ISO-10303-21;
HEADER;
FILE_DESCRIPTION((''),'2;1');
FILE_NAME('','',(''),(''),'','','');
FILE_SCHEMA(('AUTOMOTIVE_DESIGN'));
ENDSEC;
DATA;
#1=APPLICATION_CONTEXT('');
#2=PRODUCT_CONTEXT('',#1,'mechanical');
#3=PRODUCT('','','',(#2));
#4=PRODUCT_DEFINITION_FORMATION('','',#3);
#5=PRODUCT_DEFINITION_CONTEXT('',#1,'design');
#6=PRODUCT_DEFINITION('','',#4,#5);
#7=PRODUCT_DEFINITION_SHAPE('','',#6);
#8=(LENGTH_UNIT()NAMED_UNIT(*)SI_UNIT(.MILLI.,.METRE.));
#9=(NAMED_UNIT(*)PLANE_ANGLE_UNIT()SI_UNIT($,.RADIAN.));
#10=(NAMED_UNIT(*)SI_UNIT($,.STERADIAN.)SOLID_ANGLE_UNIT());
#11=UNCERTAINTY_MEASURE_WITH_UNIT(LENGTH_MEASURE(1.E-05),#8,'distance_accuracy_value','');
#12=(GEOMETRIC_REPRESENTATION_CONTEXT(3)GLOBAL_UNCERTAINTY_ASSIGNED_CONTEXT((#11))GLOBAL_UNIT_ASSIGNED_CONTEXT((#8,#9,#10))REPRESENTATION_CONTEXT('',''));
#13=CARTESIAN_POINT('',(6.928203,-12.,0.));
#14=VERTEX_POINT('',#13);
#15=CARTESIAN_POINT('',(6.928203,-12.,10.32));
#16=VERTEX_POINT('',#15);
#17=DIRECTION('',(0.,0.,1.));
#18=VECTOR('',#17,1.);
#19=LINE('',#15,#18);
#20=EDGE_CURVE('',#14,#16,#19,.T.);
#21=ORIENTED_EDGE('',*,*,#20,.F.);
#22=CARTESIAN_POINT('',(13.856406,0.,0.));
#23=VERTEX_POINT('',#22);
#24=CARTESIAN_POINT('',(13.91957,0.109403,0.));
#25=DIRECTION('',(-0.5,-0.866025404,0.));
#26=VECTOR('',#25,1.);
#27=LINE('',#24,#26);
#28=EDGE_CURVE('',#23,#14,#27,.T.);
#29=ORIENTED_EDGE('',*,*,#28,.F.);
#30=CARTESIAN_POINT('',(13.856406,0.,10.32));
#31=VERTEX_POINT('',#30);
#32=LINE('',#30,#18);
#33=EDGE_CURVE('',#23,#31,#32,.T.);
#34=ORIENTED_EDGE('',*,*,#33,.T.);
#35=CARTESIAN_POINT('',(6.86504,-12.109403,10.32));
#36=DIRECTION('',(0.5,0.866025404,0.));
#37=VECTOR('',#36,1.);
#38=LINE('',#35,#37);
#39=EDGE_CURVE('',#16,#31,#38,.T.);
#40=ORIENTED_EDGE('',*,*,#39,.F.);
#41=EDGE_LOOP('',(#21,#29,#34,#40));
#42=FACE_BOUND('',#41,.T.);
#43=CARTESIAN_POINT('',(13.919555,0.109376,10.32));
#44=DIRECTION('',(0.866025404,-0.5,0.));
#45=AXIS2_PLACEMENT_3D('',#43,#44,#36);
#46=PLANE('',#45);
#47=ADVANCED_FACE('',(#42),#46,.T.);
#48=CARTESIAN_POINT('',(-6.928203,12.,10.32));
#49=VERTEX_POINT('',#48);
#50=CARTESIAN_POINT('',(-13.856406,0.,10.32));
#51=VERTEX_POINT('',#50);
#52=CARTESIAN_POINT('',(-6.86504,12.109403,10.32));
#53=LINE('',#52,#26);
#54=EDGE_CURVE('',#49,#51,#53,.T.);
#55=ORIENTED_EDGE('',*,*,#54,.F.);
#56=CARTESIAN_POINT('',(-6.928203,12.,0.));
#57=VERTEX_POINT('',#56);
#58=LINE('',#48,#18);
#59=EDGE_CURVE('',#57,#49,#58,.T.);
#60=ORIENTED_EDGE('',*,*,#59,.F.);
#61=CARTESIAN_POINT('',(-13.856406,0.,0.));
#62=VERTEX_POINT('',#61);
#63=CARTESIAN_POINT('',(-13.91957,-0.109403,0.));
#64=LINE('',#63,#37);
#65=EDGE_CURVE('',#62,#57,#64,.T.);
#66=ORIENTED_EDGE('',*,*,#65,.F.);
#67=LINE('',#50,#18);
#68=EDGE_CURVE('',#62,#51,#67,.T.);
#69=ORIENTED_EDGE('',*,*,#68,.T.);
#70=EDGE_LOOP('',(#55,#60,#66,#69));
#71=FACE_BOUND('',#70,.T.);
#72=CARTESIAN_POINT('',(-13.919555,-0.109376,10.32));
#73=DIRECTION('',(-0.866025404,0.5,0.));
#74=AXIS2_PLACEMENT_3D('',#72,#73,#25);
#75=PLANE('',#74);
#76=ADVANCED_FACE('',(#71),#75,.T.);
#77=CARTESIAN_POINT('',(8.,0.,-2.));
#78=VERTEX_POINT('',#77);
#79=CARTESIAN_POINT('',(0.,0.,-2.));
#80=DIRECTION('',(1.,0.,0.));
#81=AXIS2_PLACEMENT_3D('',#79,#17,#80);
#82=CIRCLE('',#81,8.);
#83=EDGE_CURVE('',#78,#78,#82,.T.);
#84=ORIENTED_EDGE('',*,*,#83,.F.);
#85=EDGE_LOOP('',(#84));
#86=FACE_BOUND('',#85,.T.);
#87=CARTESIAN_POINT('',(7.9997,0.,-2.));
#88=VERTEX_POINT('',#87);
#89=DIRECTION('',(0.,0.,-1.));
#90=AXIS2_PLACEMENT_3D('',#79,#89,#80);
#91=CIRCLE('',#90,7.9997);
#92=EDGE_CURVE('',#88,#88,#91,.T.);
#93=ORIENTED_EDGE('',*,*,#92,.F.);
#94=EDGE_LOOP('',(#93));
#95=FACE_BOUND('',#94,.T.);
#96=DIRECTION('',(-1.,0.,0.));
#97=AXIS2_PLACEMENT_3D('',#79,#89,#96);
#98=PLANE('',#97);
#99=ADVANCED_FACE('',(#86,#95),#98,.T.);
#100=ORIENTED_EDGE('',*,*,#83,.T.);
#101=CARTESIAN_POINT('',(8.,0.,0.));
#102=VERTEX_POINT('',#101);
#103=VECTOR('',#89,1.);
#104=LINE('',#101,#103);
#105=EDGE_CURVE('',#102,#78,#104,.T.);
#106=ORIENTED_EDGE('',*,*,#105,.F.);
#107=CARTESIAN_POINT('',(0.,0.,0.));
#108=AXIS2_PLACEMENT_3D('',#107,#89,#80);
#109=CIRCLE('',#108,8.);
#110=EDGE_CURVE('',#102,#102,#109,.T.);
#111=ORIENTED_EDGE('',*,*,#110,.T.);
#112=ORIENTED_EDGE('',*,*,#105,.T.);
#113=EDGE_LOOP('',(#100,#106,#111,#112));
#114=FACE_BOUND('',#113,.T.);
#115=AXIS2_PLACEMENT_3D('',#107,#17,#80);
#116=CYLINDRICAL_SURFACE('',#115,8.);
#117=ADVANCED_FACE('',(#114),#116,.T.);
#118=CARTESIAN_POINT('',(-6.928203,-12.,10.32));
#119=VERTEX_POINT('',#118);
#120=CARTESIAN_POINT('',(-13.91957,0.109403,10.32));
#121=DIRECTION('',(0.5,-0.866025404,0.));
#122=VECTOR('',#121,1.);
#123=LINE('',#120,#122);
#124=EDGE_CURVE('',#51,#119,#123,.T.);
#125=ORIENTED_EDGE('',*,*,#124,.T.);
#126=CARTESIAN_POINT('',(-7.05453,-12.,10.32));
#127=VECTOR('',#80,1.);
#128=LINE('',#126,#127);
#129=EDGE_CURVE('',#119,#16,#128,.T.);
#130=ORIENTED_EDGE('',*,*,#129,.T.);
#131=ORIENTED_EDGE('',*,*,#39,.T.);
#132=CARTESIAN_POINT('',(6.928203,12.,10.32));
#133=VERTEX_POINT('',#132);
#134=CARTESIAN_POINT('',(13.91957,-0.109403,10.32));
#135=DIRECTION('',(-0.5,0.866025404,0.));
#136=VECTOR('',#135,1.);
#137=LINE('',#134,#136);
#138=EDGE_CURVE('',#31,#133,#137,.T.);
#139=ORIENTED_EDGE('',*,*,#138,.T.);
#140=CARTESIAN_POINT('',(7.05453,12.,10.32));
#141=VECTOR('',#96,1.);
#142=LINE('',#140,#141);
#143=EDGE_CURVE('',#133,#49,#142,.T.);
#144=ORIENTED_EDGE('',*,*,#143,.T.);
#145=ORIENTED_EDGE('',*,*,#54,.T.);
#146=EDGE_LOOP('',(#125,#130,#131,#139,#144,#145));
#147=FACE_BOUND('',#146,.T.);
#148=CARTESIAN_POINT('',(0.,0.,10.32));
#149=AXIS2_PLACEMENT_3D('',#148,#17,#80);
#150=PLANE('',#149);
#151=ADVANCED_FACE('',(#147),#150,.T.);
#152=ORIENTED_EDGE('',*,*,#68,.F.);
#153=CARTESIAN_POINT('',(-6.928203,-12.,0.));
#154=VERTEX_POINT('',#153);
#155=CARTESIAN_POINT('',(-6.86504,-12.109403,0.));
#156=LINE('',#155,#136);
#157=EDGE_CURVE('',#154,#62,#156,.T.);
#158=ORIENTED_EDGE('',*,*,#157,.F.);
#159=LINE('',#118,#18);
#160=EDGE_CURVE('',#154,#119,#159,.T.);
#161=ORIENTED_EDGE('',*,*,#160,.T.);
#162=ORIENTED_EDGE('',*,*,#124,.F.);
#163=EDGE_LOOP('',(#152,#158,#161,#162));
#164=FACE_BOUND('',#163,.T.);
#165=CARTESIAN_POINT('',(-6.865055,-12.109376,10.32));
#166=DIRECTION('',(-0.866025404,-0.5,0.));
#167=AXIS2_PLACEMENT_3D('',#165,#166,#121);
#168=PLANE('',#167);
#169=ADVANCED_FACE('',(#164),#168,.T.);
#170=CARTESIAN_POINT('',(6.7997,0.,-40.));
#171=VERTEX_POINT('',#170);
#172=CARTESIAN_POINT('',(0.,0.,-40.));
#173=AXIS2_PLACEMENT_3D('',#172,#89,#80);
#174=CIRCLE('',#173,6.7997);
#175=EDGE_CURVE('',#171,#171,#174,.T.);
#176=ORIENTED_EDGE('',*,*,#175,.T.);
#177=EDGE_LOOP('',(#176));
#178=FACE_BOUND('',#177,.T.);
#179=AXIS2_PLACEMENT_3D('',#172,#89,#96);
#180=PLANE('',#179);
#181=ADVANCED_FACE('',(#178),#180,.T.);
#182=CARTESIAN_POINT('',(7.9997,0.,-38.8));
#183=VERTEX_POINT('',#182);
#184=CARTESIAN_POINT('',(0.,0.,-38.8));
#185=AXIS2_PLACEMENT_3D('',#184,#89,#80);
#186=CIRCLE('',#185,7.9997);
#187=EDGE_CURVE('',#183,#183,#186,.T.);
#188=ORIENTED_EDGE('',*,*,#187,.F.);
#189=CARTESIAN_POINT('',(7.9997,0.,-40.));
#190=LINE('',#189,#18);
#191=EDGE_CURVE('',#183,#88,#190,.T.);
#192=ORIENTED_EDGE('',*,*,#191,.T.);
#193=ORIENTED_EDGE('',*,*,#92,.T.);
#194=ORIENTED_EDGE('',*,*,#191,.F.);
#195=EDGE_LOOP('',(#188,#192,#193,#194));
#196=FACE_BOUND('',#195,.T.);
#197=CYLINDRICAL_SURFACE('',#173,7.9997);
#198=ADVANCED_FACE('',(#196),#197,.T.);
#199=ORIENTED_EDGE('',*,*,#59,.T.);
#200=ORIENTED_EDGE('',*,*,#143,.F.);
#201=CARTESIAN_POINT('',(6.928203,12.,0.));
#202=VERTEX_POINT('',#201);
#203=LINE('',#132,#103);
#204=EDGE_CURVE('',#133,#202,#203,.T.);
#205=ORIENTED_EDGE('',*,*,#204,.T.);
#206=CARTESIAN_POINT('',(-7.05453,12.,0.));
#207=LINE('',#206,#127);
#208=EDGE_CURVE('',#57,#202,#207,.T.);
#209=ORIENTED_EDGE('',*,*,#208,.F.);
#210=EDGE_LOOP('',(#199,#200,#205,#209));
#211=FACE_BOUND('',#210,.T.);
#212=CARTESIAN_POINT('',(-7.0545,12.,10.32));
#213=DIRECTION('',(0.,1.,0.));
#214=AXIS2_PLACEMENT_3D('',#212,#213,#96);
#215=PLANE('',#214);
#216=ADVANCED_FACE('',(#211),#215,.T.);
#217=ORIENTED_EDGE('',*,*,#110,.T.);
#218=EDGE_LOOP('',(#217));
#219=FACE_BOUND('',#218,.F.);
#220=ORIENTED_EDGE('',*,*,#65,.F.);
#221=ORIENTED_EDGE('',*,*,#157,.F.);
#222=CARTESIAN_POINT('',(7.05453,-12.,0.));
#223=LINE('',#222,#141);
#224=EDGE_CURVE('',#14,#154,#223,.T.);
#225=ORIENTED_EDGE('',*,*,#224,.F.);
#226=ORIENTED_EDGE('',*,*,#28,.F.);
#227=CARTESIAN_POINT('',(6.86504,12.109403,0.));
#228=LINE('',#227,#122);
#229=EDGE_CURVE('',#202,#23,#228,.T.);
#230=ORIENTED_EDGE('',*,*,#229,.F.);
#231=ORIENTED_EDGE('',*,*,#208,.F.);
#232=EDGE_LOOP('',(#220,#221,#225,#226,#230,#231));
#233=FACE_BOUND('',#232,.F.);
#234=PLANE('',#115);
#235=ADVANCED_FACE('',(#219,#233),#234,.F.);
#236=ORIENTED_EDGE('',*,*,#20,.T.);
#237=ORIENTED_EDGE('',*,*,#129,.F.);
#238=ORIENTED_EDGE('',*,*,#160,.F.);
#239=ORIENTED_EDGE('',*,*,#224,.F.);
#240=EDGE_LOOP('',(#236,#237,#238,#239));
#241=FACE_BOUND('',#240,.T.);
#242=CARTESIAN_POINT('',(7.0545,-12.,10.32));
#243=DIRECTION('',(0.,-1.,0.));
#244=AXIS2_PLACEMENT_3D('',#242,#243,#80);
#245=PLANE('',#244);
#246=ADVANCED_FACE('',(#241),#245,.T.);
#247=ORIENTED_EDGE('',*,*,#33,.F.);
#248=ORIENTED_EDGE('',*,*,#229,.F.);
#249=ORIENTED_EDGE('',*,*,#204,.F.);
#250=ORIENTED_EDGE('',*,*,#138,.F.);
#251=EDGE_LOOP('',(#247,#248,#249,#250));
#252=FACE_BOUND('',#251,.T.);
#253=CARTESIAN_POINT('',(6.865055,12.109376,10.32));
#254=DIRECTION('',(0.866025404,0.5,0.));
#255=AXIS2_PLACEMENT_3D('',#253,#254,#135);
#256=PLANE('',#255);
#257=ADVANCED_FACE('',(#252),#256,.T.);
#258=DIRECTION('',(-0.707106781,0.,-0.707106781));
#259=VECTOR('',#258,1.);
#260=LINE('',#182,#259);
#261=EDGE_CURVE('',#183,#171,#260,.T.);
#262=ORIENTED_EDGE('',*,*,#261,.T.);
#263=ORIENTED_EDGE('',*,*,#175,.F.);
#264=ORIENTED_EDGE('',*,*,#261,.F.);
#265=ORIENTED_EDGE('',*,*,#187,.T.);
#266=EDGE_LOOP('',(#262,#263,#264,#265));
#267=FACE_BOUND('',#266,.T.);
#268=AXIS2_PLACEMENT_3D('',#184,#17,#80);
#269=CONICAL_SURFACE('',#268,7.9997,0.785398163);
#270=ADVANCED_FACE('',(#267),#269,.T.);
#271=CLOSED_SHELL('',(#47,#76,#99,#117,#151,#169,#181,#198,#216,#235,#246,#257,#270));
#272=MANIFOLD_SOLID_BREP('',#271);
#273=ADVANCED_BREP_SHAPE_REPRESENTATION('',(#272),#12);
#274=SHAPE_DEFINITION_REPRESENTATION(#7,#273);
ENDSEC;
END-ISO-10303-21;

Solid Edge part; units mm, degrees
sketch "Sketch1" plane through (0, 0, 0) normal (0, 0, 1) x (1, 0, 0)
  circle A0 centre (0, 0) radius 13.92
  dimension "D1" = 27.84
extrude "Protrusion1" add sketch "Sketch1" along normal blind 10.32
sketch "Sketch2" plane through (0, 0, 0) normal (0, 0, -1) x (1, 0, 0)
  circle A0 centre (0, 0) radius 8
extrude "Protrusion2" add sketch "Sketch2" along normal blind 40
sketch "Sketch3" plane through (0, 0, -40) normal (0, 0, -1) x (1, 0, 0)
  circle A0 centre (0, 0) radius 7.9997
extrude "Cutout1" cut sketch "Sketch3" against normal blind 38 flip side to cut
chamfer "Chamfer_1" distance 1.2 angle 45 1 edges at (-7.9997, 0, -40)
sketch "Sketch4" plane through (0, 0, 10.32) normal (0, 0, 1) x (1, 0, 0)
  line L0 (-7.0545, 12) -> (7.0545, 12)
  dimension "D1" = 24
extrude "Cutout2" cut sketch "Sketch4" against normal up to next material side at (0, 12.05, 10.32)
pattern_circular "Pattern1" count 6 over 360 about axis through (0, 0, 10.32) along (0, 0, 1) of "Cutout2"
properties part number "24101714"
